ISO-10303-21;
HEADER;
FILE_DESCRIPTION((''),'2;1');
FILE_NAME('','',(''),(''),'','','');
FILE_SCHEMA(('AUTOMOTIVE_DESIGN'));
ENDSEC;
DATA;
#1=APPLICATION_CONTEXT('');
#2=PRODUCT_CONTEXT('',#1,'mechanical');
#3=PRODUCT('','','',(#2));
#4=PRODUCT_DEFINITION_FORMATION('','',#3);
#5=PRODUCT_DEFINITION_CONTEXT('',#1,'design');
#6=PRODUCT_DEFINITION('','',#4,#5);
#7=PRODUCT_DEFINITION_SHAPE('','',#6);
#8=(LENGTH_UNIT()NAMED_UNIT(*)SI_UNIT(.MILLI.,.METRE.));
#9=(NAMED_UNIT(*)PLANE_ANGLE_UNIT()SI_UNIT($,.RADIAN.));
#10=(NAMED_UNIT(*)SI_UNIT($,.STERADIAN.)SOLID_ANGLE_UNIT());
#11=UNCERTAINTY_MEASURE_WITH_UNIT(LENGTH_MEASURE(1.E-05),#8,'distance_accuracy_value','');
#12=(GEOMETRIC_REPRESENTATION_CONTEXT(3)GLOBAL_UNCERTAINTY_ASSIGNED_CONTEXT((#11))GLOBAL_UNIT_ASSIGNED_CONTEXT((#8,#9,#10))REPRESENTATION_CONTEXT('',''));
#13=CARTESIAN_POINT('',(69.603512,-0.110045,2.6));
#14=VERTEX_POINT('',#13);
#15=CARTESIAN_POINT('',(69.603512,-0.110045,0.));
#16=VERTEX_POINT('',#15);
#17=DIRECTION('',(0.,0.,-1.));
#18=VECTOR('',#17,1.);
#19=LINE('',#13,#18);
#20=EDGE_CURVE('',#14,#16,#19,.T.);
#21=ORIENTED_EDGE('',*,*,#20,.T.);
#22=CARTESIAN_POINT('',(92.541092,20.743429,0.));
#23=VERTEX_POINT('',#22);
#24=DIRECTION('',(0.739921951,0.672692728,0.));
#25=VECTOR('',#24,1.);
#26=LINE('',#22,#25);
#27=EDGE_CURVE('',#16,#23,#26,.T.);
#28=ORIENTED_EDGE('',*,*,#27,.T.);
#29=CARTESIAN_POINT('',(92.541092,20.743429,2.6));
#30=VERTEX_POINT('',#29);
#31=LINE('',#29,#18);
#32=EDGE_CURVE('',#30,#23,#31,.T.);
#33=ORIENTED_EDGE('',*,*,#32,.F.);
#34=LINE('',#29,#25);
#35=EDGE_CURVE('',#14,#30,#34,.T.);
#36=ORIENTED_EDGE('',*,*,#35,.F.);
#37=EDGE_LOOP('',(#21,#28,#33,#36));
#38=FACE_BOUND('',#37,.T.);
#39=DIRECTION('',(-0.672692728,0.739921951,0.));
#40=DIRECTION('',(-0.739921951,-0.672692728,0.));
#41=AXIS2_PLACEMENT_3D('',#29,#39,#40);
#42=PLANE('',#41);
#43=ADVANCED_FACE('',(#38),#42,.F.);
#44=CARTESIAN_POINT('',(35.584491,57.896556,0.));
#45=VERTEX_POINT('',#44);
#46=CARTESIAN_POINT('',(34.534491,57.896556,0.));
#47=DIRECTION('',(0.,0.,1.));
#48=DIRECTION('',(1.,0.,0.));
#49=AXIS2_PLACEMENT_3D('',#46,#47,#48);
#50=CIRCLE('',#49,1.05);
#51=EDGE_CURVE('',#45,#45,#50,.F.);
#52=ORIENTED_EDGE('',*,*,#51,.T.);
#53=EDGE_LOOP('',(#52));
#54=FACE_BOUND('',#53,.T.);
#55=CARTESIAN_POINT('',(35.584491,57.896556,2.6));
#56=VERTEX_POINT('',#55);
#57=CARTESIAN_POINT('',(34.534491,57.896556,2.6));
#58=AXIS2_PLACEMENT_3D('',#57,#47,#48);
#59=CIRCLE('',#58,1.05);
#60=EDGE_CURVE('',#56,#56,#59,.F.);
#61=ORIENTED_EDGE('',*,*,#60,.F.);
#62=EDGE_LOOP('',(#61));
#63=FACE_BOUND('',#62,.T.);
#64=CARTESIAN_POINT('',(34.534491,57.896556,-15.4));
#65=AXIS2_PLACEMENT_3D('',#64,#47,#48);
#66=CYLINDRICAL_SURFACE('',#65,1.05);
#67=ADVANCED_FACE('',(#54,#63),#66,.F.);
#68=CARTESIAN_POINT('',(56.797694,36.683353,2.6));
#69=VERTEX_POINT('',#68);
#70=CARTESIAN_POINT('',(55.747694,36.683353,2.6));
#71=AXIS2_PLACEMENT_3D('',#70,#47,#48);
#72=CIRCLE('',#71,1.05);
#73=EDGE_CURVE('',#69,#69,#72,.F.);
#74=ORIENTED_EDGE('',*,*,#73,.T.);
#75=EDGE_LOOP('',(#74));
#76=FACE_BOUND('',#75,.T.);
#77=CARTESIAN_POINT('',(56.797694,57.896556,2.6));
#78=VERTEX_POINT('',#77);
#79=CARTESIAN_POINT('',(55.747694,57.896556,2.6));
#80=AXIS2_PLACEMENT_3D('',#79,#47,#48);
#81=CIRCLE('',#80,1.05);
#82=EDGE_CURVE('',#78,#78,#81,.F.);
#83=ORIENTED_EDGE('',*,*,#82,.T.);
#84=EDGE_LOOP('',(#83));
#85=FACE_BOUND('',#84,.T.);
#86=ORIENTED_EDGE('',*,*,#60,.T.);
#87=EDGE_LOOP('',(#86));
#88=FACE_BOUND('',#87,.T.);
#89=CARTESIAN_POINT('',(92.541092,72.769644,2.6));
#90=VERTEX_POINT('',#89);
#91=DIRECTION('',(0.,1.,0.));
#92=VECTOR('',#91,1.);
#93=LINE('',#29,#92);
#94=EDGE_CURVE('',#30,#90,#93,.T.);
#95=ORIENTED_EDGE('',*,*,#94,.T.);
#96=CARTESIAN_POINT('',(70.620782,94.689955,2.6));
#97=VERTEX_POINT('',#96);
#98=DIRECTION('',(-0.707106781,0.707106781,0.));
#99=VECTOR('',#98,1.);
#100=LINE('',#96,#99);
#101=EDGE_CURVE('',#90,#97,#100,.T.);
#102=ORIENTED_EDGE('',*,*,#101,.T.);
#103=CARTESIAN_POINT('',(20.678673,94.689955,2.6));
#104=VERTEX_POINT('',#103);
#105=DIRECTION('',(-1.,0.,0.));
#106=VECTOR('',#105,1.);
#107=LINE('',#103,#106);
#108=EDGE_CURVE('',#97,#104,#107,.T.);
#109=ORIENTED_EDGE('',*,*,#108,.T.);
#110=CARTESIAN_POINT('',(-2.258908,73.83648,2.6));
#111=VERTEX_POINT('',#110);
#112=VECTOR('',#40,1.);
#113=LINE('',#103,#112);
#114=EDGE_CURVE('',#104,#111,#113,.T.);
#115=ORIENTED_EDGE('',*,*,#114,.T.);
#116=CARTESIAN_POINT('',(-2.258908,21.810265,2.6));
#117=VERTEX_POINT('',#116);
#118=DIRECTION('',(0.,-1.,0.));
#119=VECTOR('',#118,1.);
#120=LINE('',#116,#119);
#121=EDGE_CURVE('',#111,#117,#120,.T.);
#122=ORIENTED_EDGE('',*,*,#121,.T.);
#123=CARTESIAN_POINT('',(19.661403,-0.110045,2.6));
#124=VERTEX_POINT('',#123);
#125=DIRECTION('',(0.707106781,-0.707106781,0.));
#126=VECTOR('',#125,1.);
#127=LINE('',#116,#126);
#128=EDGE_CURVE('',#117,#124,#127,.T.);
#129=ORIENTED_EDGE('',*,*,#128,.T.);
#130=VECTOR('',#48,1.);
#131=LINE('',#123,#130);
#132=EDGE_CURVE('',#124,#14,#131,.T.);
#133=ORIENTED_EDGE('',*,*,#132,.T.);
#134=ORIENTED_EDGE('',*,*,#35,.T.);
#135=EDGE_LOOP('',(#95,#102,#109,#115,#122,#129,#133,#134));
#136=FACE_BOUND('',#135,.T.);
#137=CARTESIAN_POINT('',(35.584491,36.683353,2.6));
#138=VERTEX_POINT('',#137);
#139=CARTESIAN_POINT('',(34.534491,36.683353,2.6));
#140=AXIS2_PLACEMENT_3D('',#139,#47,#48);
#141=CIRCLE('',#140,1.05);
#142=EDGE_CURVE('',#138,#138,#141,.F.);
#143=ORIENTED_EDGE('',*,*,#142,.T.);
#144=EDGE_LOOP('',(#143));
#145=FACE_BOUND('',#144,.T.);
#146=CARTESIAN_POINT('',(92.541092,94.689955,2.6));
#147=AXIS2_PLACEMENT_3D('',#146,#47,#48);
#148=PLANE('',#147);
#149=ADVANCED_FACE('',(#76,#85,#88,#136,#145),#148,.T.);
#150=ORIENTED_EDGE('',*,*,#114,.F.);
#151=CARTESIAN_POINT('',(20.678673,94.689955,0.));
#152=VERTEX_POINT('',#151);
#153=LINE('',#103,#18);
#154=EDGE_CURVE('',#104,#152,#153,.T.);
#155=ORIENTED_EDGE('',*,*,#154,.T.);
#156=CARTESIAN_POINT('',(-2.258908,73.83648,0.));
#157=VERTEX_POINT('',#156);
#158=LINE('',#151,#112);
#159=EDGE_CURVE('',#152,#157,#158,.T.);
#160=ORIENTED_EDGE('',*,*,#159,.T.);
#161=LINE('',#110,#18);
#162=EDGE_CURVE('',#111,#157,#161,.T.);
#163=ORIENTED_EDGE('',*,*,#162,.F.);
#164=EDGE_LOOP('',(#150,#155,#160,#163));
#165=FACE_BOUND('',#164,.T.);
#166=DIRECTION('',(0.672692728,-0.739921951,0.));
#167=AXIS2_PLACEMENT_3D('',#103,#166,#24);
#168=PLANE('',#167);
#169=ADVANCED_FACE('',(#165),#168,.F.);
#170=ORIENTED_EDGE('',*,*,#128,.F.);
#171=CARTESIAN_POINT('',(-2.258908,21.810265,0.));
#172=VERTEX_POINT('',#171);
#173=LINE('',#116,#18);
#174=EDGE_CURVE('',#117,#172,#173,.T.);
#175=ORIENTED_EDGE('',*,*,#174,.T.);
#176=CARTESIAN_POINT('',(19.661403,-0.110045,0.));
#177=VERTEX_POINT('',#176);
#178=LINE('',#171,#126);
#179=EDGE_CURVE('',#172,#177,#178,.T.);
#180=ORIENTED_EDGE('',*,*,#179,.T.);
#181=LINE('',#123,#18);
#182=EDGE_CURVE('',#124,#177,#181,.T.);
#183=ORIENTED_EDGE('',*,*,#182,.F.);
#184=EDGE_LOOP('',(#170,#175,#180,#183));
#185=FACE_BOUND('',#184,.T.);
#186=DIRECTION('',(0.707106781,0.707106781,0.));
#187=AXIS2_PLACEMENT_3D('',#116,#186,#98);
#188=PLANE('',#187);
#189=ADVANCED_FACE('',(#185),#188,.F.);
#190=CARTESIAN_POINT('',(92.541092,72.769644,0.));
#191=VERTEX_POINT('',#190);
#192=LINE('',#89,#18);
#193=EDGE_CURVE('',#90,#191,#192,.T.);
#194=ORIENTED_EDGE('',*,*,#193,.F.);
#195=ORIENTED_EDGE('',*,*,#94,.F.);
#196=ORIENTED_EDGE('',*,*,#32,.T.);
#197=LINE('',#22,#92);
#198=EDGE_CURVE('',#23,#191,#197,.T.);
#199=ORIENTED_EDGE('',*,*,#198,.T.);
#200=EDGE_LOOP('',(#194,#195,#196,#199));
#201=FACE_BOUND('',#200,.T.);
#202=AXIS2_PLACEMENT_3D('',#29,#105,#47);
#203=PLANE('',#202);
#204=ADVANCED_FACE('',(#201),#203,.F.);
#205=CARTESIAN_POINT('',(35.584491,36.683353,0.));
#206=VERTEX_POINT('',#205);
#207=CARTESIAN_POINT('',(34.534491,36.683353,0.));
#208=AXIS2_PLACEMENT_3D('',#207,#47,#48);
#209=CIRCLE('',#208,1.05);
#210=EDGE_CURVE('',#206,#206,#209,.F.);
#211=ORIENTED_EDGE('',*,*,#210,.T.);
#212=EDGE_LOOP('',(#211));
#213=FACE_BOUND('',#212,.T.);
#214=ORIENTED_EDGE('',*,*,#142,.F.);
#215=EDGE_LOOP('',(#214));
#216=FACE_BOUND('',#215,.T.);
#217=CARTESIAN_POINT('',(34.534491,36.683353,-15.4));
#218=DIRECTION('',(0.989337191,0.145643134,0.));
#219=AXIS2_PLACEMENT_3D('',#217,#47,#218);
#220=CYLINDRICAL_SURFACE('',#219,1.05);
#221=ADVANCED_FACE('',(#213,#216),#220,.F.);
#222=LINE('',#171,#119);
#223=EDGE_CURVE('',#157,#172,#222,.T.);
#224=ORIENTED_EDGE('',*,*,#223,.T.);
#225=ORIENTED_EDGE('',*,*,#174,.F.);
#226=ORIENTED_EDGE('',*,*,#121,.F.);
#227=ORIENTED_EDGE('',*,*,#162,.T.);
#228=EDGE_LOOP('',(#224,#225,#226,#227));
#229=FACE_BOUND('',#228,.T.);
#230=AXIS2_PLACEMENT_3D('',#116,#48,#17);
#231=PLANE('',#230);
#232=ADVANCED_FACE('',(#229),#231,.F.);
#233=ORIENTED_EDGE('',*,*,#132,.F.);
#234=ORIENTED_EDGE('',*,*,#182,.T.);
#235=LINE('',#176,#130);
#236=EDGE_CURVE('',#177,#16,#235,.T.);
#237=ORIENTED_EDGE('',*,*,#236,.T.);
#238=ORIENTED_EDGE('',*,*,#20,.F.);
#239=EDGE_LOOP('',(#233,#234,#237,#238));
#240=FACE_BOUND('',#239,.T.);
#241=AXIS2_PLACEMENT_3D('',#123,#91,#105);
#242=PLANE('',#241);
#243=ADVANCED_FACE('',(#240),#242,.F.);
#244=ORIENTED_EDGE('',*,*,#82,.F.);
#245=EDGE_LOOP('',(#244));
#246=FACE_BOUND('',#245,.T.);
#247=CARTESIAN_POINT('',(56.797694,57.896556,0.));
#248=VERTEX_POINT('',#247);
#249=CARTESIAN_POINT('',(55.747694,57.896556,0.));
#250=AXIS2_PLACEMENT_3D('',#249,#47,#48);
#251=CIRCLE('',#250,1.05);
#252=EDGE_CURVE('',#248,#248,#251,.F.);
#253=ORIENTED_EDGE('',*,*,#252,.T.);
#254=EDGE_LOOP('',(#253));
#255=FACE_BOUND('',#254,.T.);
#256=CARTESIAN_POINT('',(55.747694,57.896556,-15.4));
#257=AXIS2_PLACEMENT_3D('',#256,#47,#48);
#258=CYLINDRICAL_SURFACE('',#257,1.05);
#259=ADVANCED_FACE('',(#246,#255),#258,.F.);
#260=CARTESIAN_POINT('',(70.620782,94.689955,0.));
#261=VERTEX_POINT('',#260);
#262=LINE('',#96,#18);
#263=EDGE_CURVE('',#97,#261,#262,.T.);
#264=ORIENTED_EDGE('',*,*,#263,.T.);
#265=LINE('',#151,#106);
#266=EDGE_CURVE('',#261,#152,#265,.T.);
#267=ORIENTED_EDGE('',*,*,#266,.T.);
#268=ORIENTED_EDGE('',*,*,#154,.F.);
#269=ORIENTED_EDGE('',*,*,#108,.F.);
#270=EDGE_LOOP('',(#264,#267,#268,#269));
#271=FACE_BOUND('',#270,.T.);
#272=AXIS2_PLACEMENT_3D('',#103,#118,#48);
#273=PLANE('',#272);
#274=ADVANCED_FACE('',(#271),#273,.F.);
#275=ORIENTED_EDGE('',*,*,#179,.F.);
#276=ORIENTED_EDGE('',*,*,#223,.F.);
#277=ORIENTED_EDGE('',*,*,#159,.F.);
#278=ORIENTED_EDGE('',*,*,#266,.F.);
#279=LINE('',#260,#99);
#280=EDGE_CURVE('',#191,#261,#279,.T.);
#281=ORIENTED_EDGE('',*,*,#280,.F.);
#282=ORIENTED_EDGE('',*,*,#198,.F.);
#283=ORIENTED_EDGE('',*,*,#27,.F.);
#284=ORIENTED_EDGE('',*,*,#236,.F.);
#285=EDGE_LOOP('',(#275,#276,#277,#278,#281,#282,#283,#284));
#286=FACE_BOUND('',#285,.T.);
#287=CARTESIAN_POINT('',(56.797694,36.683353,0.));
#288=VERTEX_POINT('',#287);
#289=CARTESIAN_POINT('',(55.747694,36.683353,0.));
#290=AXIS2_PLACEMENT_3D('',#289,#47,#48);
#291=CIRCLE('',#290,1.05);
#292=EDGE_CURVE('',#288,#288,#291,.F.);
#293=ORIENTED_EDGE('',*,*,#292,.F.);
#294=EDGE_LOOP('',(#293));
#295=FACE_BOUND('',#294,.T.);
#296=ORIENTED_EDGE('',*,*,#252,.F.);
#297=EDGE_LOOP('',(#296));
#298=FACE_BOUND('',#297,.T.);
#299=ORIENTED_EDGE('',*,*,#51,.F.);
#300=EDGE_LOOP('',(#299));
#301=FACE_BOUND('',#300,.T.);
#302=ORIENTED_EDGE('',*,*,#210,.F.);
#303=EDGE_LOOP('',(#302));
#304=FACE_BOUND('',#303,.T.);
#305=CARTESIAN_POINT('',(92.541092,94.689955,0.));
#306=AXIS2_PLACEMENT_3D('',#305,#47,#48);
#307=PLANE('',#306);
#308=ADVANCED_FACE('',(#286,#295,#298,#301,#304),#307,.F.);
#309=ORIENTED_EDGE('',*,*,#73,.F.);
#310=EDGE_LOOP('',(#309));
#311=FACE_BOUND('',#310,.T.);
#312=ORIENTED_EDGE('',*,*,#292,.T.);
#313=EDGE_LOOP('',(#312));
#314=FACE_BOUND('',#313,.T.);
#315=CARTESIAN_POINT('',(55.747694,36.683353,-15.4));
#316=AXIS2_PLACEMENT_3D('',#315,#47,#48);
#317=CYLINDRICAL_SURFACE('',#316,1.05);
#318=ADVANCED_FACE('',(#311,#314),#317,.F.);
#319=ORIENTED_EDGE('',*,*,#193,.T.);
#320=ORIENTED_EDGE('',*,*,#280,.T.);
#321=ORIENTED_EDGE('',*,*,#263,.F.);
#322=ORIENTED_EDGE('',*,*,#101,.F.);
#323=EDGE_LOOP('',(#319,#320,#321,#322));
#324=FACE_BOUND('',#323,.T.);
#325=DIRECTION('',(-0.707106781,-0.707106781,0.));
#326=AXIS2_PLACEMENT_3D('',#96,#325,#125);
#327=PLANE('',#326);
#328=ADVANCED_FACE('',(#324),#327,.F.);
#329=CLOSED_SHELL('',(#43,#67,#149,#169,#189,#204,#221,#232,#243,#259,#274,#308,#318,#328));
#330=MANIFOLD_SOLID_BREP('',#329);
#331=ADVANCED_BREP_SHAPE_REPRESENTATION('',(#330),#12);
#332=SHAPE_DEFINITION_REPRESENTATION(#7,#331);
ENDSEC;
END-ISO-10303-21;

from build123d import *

# Parameters (mm, degrees)
BOSS_EXTRUDE1_DEPTH = 2.6
CAVITY1_OUTLINE_R   = 1.05
CAVITY1_DEPTH       = 2.6


# Read off the part's stored shape, not the designer's step: Cavity1
with BuildPart() as part:
    # Sketch1 → Boss-Extrude1 (new body)
    with BuildSketch(Plane.XY):
        Polygon((20.678672923, 94.689954591), (-2.25890757, 73.836480034), (-2.25890757, 21.810264808), (19.661402647, -0.110045409), (69.603511937, -0.110045409), (92.54109243, 20.743429149), (92.54109243, 72.769644374), (70.620782213, 94.689954591), align=None)
    extrude(amount=BOSS_EXTRUDE1_DEPTH)

    # Cavity1 outline → Cavity1 (cut)
    with BuildSketch(Plane.XY):
        with Locations((34.534490712, 57.896556309)):
            Circle(CAVITY1_OUTLINE_R)
        with Locations((34.534490712, 36.683352873)):
            Circle(CAVITY1_OUTLINE_R)
        with Locations((55.747694148, 57.896556309)):
            Circle(CAVITY1_OUTLINE_R)
        with Locations((55.747694148, 36.683352873)):
            Circle(CAVITY1_OUTLINE_R)
    extrude(amount=CAVITY1_DEPTH, mode=Mode.SUBTRACT)


solid = part.part
